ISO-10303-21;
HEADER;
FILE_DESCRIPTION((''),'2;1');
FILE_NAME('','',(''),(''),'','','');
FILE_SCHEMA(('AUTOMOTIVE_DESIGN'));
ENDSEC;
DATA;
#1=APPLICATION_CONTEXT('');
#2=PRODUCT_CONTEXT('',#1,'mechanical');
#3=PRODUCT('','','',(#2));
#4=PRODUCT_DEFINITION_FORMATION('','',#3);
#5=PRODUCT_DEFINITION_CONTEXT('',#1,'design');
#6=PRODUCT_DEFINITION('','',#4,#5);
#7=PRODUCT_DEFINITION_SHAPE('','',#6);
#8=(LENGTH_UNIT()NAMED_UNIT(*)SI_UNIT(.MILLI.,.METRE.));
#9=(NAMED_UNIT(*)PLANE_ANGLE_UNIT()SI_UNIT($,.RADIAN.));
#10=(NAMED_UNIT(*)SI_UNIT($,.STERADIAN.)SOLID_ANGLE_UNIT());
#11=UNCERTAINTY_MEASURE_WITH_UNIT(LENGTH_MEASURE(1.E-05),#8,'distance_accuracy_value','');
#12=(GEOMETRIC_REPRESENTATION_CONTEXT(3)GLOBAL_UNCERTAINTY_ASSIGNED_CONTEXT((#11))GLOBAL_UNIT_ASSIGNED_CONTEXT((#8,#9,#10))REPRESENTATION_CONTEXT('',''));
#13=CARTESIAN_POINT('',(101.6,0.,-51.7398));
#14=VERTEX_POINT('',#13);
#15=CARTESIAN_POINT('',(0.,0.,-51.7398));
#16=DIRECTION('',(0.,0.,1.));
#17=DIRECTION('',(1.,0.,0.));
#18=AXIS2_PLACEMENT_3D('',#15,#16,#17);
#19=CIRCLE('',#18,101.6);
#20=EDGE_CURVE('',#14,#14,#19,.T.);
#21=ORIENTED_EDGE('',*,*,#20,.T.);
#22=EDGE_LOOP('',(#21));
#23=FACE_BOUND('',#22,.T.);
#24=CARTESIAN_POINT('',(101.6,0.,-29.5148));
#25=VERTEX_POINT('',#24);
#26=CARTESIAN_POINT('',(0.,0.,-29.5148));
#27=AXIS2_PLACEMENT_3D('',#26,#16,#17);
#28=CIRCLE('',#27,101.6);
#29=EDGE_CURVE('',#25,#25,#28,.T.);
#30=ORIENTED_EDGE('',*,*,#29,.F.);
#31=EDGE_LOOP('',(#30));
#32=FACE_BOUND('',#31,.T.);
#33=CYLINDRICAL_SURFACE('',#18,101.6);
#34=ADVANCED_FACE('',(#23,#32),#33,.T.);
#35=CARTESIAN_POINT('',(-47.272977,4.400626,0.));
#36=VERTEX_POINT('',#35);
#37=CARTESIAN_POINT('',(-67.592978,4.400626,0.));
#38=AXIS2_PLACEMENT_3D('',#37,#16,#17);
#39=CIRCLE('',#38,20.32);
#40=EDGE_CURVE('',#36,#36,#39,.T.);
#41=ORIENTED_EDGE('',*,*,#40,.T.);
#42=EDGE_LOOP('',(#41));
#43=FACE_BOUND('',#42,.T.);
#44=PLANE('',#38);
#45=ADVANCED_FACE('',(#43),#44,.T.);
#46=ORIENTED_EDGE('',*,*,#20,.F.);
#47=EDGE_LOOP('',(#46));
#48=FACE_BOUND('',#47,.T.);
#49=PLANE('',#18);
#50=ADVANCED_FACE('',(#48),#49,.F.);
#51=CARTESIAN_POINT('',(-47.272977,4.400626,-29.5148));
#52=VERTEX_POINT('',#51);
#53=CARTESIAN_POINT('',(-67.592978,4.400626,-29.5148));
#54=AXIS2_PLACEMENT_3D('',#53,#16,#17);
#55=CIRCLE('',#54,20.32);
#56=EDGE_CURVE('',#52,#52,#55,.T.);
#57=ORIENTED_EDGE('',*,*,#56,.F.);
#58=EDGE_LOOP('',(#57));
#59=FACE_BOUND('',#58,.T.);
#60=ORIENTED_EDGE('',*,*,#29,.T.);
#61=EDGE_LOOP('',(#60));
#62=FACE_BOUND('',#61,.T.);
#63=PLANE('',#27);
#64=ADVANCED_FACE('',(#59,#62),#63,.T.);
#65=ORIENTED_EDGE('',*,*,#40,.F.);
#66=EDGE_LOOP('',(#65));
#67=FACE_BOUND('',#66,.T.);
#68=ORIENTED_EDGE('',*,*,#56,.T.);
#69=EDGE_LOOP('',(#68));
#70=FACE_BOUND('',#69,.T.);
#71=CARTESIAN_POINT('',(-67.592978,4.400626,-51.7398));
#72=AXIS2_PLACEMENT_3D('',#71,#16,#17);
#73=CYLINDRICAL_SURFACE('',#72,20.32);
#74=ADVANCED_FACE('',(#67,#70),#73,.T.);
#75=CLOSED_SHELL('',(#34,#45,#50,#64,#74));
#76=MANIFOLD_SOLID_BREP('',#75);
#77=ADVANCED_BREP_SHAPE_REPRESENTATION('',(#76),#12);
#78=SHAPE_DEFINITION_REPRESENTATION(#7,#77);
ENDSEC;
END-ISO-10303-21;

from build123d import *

# Parameters (mm, degrees)
EXTRUDE1_START       = -51.7398
EXTRUDE1_OUTLINE_R   = 101.6
EXTRUDE1_OUTLINE_R_2 = 20.320000135
EXTRUDE1_DEPTH       = 22.225
SKETCH2_R            = 20.320000135
EXTRUDE3_DEPTH       = 51.7398


# Read off the part's stored shape, not the designer's step: Extrude1
with BuildPart() as part:
    # Extrude1 outline → Extrude1 (new body)
    with BuildSketch(Plane.XY.offset(EXTRUDE1_START)):
        Circle(EXTRUDE1_OUTLINE_R)
        with Locations((-67.592977533, 4.400625988)):
            Circle(EXTRUDE1_OUTLINE_R_2, mode=Mode.SUBTRACT)
    extrude(amount=EXTRUDE1_DEPTH)

    # Sketch2 → Extrude3 (add, through all)
    with BuildSketch(Plane.XY):
        with Locations((-67.592977533, 4.400625988)):
            Circle(SKETCH2_R)
    extrude(amount=-EXTRUDE3_DEPTH)


solid = part.part
